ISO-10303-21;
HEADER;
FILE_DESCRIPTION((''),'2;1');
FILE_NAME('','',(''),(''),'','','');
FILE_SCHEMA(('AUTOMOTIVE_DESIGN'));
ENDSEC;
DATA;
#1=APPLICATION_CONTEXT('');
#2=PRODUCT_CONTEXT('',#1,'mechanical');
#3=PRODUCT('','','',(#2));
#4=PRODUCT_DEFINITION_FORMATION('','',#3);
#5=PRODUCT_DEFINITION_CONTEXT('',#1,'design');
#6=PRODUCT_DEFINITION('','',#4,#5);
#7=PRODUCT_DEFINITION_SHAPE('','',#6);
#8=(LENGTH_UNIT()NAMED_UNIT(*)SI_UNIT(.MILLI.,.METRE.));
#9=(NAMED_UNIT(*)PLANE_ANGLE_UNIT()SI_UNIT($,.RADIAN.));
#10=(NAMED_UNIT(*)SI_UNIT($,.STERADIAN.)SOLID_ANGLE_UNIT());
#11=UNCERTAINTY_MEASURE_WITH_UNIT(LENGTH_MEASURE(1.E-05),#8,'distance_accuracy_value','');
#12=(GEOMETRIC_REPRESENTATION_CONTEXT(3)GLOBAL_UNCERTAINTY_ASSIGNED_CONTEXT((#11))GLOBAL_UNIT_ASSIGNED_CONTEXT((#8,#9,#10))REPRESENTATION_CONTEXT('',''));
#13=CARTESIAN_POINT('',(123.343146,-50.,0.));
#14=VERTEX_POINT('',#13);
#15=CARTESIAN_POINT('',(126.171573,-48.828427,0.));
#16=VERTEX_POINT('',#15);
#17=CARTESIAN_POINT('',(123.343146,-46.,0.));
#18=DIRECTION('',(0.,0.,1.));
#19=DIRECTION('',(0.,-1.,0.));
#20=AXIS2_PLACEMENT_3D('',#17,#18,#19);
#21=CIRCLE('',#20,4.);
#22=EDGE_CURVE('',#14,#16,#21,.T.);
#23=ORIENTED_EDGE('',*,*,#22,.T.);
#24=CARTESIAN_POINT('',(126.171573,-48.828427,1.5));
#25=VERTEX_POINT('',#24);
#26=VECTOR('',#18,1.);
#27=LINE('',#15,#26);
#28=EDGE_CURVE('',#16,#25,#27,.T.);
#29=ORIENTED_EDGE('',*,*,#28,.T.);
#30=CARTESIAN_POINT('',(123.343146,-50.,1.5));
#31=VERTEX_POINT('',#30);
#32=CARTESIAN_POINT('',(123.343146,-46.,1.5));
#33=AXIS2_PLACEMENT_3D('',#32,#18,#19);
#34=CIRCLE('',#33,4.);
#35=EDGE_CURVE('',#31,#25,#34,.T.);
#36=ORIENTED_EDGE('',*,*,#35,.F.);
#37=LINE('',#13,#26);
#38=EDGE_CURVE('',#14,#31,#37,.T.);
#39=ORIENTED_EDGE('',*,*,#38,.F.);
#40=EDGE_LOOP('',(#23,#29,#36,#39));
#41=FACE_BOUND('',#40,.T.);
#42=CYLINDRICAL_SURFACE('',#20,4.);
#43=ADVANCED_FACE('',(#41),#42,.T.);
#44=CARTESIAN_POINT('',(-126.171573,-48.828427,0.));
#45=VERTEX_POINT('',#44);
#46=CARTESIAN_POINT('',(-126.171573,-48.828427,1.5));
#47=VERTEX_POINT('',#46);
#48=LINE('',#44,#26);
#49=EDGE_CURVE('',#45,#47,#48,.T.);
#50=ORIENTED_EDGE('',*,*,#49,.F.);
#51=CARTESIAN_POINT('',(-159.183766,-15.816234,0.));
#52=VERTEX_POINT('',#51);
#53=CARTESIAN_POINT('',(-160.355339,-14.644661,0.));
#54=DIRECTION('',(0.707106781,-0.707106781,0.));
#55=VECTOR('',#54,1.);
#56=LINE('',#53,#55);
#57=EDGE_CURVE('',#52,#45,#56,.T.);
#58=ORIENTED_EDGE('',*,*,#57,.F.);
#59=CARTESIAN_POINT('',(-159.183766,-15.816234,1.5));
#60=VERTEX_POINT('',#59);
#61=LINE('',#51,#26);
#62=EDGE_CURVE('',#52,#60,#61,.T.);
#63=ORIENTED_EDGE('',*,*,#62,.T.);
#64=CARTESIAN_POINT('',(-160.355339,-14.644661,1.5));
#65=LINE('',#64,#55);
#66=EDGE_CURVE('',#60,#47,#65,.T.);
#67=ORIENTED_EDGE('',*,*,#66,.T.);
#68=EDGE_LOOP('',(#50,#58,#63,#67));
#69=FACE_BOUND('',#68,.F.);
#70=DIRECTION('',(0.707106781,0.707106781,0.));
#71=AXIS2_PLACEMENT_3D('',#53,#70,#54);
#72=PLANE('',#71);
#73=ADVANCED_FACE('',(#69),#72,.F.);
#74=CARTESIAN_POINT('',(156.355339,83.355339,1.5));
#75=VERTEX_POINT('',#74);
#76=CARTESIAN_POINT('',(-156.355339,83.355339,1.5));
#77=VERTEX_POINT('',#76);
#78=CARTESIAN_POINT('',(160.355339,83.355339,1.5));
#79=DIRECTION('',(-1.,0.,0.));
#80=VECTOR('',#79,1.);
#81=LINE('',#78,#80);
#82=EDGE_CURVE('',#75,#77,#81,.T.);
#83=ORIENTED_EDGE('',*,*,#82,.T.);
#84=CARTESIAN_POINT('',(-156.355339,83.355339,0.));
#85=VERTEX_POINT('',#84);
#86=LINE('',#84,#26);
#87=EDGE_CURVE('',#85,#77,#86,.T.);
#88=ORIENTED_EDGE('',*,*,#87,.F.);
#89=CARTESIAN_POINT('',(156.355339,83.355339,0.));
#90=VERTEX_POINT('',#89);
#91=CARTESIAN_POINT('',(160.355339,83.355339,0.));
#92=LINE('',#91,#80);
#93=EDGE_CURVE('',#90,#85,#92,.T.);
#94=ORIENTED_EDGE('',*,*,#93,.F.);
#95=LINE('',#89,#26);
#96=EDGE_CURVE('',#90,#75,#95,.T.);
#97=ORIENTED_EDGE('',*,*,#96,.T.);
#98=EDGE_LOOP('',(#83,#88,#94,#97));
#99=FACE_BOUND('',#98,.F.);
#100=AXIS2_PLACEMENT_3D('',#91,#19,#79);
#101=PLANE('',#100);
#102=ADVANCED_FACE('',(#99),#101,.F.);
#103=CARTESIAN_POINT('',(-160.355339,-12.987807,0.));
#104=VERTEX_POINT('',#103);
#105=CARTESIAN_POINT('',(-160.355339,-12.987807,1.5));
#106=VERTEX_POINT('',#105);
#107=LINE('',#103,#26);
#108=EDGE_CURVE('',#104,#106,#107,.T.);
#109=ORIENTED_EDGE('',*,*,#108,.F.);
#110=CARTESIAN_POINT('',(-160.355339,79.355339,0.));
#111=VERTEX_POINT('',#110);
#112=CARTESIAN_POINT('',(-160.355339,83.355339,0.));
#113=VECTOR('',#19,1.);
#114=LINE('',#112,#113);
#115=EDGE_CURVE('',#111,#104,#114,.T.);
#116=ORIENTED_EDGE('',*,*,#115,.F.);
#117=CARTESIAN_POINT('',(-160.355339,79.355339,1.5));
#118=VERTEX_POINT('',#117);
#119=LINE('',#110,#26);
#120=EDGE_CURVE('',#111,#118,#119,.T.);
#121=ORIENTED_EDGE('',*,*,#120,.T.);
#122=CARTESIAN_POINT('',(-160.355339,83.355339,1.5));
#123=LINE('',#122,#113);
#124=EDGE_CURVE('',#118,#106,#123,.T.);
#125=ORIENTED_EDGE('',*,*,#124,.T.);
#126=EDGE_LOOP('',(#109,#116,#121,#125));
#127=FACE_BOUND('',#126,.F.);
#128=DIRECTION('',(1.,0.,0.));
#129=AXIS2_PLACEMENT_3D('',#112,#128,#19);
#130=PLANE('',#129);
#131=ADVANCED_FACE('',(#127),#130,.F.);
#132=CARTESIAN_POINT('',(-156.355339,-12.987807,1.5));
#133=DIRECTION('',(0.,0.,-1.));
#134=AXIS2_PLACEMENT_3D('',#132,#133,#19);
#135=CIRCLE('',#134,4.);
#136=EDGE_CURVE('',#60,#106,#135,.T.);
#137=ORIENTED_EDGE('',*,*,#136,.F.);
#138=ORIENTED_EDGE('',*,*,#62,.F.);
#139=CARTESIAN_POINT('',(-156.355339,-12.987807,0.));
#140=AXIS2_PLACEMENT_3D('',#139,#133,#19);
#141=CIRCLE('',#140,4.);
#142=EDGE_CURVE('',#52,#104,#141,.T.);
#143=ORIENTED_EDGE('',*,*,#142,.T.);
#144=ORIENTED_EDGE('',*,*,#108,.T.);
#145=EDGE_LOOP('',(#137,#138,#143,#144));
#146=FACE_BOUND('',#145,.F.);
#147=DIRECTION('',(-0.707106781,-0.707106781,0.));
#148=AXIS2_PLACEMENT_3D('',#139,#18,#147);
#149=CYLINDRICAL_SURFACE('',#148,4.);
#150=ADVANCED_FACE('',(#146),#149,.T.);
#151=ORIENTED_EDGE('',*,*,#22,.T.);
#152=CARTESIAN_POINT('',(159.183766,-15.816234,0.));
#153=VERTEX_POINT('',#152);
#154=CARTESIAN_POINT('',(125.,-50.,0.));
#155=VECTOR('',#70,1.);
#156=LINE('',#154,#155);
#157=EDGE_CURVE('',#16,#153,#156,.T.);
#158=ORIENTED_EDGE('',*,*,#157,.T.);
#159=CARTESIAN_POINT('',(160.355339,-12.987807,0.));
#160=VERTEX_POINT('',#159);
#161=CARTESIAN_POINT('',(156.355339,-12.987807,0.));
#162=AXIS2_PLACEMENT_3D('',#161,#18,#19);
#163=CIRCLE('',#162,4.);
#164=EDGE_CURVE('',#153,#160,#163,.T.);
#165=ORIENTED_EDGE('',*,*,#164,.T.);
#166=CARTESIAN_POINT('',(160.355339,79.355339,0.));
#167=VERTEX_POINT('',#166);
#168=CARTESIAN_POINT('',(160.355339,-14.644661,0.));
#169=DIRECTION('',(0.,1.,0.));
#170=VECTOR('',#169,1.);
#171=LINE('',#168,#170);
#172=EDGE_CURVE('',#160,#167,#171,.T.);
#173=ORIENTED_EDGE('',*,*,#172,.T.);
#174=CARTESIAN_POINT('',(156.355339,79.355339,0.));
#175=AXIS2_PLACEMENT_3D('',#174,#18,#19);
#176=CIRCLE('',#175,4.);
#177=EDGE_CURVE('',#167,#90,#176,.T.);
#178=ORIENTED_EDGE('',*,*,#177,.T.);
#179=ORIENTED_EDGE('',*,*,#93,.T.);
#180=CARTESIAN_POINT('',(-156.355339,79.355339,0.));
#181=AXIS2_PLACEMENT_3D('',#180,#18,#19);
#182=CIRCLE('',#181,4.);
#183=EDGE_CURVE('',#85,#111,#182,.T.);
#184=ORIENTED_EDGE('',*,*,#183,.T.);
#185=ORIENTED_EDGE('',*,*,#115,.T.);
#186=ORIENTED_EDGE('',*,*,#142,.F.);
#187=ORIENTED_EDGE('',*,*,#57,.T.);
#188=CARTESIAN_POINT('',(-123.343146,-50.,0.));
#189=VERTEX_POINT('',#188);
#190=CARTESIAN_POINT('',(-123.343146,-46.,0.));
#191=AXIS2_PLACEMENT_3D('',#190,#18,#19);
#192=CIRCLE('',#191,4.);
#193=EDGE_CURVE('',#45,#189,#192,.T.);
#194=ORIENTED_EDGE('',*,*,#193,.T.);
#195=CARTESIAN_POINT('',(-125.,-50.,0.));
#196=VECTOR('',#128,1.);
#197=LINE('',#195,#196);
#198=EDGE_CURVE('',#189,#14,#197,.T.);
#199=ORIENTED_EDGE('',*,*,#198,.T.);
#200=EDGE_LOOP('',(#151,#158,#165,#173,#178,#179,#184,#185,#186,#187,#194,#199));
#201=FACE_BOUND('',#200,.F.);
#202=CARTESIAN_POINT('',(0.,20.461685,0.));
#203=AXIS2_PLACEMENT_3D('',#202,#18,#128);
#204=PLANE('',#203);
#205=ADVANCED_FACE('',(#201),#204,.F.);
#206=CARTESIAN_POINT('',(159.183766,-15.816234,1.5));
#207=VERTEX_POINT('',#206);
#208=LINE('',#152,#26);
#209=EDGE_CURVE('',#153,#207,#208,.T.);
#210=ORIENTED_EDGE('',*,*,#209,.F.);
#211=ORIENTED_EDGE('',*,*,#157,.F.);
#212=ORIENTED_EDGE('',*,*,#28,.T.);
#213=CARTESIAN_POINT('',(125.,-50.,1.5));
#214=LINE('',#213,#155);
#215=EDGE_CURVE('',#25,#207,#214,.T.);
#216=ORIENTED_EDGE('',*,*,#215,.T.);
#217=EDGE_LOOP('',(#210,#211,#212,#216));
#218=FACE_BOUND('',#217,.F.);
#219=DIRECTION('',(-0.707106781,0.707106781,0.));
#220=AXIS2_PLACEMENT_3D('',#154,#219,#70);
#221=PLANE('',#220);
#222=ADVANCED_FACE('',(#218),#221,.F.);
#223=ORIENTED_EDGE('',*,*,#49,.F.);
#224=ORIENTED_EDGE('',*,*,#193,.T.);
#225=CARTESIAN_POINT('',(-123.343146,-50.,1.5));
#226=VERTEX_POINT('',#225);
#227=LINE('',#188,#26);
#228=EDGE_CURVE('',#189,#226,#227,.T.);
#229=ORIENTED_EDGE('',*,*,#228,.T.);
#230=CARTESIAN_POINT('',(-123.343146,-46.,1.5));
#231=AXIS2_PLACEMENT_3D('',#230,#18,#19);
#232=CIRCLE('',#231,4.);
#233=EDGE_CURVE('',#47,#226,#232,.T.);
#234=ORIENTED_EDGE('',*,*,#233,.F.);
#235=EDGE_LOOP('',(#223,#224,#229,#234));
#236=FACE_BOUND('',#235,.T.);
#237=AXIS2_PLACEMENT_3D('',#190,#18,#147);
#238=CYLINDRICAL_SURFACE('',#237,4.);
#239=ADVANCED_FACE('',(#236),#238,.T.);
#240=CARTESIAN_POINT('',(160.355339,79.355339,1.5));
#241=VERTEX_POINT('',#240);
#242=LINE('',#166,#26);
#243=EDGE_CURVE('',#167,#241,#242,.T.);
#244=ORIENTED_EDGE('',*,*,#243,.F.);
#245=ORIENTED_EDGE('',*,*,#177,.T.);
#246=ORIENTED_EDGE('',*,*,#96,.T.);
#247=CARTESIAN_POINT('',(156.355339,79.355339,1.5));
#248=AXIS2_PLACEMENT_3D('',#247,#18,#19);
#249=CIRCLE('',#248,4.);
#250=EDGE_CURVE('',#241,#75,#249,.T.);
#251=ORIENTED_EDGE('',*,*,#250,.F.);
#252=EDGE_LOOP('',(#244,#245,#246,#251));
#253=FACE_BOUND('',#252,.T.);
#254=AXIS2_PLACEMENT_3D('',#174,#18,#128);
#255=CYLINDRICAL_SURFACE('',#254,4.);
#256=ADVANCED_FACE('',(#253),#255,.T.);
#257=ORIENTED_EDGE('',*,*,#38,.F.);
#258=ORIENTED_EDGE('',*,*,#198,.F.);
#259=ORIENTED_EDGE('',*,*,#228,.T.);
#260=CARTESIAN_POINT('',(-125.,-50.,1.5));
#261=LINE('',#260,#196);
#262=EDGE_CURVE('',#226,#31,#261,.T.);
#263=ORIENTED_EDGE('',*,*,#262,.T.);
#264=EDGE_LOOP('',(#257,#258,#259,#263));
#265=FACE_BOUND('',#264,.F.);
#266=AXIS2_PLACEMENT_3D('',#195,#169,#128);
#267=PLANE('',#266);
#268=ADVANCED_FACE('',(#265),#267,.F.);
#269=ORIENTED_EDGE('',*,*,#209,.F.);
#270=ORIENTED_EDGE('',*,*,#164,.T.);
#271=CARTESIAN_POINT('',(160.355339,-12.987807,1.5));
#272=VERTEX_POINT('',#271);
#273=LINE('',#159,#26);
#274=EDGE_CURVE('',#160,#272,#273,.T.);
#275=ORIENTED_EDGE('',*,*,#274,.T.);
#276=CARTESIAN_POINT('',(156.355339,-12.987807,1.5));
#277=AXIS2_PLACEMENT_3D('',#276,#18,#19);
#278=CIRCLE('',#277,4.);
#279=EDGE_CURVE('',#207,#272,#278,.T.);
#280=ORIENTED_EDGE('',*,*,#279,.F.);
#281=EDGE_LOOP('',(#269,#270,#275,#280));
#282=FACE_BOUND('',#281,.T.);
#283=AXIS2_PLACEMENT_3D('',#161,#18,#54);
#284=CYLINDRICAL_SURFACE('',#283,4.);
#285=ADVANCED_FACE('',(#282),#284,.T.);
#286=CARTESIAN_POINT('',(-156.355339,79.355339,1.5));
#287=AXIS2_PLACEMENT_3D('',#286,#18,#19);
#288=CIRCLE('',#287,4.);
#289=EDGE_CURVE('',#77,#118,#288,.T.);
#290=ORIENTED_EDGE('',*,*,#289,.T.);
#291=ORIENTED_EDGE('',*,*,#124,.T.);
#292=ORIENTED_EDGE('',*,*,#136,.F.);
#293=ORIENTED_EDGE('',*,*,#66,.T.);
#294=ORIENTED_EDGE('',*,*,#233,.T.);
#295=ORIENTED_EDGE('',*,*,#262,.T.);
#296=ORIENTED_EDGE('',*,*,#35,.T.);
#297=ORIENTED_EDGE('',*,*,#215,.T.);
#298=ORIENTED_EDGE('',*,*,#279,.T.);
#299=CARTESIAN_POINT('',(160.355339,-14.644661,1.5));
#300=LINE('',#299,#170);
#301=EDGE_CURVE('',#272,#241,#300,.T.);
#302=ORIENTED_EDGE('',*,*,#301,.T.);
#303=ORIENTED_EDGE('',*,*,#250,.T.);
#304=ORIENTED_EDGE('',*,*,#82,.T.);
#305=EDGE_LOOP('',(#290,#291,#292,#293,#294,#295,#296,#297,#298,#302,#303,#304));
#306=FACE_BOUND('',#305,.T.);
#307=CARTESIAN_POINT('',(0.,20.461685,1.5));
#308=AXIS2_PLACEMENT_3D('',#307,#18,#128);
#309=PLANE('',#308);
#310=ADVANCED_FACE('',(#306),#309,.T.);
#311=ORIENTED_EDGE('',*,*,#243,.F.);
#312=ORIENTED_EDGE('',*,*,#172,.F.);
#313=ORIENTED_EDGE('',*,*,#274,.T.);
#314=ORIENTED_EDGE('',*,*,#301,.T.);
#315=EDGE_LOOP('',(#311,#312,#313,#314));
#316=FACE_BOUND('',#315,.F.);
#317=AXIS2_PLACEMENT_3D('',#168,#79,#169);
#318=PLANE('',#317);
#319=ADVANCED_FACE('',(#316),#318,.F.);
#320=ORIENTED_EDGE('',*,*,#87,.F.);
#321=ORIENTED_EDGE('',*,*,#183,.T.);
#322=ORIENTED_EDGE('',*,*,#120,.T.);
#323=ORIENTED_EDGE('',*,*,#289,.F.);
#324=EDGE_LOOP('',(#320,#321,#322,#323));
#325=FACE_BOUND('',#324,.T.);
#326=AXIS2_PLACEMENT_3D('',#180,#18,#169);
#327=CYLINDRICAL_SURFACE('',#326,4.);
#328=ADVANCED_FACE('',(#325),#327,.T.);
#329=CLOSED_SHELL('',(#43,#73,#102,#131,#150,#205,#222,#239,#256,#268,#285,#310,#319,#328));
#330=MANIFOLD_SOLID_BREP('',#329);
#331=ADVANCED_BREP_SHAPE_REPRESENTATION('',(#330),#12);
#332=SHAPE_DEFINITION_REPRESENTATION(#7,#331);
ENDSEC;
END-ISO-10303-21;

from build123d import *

# Parameters (mm, degrees)
F1_DEPTH = 1.5
F2_R     = 4


# Not quite as in the source:
# - a feature names something its author has since deleted; it is built from what else it names


with BuildPart() as f1:
    # F0 (on Top) → F1 (new body)
    with BuildSketch(Plane.XY):
        Polygon((-160.3553390593, -14.6446609407), (-125, -50), (125, -50), (160.3553390593, -14.6446609407), (160.3553390593, 83.3553390593), (-160.3553390593, 83.3553390593), align=None)
        Polygon((-118.7867965644, -35), (-145.3553390593, -8.4314575051), (-145.3553390593, 68.3553390593), (145.3553390593, 68.3553390593), (145.3553390593, -8.4314575051), (118.7867965644, -35), align=None, mode=Mode.SUBTRACT)
        Polygon((-145.3553390593, 68.3553390593), (-145.3553390593, -8.4314575051), (-118.7867965644, -35), (118.7867965644, -35), (145.3553390593, -8.4314575051), (145.3553390593, 68.3553390593), align=None)
    extrude(amount=F1_DEPTH)

    # F2
    f2_edges = [f1.edges().sort_by_distance(p)[0] for p in [
        (160.355339, -14.644661, 0.75),
        (125, -50, 0.75),
        (160.355339, 83.355339, 0.75),
        (-125, -50, 0.75),
        (-160.355339, -14.644661, 0.75),
        (-160.355339, 83.355339, 0.75),
    ]]
    fillet(f2_edges, radius=F2_R)


solid = f1.part
